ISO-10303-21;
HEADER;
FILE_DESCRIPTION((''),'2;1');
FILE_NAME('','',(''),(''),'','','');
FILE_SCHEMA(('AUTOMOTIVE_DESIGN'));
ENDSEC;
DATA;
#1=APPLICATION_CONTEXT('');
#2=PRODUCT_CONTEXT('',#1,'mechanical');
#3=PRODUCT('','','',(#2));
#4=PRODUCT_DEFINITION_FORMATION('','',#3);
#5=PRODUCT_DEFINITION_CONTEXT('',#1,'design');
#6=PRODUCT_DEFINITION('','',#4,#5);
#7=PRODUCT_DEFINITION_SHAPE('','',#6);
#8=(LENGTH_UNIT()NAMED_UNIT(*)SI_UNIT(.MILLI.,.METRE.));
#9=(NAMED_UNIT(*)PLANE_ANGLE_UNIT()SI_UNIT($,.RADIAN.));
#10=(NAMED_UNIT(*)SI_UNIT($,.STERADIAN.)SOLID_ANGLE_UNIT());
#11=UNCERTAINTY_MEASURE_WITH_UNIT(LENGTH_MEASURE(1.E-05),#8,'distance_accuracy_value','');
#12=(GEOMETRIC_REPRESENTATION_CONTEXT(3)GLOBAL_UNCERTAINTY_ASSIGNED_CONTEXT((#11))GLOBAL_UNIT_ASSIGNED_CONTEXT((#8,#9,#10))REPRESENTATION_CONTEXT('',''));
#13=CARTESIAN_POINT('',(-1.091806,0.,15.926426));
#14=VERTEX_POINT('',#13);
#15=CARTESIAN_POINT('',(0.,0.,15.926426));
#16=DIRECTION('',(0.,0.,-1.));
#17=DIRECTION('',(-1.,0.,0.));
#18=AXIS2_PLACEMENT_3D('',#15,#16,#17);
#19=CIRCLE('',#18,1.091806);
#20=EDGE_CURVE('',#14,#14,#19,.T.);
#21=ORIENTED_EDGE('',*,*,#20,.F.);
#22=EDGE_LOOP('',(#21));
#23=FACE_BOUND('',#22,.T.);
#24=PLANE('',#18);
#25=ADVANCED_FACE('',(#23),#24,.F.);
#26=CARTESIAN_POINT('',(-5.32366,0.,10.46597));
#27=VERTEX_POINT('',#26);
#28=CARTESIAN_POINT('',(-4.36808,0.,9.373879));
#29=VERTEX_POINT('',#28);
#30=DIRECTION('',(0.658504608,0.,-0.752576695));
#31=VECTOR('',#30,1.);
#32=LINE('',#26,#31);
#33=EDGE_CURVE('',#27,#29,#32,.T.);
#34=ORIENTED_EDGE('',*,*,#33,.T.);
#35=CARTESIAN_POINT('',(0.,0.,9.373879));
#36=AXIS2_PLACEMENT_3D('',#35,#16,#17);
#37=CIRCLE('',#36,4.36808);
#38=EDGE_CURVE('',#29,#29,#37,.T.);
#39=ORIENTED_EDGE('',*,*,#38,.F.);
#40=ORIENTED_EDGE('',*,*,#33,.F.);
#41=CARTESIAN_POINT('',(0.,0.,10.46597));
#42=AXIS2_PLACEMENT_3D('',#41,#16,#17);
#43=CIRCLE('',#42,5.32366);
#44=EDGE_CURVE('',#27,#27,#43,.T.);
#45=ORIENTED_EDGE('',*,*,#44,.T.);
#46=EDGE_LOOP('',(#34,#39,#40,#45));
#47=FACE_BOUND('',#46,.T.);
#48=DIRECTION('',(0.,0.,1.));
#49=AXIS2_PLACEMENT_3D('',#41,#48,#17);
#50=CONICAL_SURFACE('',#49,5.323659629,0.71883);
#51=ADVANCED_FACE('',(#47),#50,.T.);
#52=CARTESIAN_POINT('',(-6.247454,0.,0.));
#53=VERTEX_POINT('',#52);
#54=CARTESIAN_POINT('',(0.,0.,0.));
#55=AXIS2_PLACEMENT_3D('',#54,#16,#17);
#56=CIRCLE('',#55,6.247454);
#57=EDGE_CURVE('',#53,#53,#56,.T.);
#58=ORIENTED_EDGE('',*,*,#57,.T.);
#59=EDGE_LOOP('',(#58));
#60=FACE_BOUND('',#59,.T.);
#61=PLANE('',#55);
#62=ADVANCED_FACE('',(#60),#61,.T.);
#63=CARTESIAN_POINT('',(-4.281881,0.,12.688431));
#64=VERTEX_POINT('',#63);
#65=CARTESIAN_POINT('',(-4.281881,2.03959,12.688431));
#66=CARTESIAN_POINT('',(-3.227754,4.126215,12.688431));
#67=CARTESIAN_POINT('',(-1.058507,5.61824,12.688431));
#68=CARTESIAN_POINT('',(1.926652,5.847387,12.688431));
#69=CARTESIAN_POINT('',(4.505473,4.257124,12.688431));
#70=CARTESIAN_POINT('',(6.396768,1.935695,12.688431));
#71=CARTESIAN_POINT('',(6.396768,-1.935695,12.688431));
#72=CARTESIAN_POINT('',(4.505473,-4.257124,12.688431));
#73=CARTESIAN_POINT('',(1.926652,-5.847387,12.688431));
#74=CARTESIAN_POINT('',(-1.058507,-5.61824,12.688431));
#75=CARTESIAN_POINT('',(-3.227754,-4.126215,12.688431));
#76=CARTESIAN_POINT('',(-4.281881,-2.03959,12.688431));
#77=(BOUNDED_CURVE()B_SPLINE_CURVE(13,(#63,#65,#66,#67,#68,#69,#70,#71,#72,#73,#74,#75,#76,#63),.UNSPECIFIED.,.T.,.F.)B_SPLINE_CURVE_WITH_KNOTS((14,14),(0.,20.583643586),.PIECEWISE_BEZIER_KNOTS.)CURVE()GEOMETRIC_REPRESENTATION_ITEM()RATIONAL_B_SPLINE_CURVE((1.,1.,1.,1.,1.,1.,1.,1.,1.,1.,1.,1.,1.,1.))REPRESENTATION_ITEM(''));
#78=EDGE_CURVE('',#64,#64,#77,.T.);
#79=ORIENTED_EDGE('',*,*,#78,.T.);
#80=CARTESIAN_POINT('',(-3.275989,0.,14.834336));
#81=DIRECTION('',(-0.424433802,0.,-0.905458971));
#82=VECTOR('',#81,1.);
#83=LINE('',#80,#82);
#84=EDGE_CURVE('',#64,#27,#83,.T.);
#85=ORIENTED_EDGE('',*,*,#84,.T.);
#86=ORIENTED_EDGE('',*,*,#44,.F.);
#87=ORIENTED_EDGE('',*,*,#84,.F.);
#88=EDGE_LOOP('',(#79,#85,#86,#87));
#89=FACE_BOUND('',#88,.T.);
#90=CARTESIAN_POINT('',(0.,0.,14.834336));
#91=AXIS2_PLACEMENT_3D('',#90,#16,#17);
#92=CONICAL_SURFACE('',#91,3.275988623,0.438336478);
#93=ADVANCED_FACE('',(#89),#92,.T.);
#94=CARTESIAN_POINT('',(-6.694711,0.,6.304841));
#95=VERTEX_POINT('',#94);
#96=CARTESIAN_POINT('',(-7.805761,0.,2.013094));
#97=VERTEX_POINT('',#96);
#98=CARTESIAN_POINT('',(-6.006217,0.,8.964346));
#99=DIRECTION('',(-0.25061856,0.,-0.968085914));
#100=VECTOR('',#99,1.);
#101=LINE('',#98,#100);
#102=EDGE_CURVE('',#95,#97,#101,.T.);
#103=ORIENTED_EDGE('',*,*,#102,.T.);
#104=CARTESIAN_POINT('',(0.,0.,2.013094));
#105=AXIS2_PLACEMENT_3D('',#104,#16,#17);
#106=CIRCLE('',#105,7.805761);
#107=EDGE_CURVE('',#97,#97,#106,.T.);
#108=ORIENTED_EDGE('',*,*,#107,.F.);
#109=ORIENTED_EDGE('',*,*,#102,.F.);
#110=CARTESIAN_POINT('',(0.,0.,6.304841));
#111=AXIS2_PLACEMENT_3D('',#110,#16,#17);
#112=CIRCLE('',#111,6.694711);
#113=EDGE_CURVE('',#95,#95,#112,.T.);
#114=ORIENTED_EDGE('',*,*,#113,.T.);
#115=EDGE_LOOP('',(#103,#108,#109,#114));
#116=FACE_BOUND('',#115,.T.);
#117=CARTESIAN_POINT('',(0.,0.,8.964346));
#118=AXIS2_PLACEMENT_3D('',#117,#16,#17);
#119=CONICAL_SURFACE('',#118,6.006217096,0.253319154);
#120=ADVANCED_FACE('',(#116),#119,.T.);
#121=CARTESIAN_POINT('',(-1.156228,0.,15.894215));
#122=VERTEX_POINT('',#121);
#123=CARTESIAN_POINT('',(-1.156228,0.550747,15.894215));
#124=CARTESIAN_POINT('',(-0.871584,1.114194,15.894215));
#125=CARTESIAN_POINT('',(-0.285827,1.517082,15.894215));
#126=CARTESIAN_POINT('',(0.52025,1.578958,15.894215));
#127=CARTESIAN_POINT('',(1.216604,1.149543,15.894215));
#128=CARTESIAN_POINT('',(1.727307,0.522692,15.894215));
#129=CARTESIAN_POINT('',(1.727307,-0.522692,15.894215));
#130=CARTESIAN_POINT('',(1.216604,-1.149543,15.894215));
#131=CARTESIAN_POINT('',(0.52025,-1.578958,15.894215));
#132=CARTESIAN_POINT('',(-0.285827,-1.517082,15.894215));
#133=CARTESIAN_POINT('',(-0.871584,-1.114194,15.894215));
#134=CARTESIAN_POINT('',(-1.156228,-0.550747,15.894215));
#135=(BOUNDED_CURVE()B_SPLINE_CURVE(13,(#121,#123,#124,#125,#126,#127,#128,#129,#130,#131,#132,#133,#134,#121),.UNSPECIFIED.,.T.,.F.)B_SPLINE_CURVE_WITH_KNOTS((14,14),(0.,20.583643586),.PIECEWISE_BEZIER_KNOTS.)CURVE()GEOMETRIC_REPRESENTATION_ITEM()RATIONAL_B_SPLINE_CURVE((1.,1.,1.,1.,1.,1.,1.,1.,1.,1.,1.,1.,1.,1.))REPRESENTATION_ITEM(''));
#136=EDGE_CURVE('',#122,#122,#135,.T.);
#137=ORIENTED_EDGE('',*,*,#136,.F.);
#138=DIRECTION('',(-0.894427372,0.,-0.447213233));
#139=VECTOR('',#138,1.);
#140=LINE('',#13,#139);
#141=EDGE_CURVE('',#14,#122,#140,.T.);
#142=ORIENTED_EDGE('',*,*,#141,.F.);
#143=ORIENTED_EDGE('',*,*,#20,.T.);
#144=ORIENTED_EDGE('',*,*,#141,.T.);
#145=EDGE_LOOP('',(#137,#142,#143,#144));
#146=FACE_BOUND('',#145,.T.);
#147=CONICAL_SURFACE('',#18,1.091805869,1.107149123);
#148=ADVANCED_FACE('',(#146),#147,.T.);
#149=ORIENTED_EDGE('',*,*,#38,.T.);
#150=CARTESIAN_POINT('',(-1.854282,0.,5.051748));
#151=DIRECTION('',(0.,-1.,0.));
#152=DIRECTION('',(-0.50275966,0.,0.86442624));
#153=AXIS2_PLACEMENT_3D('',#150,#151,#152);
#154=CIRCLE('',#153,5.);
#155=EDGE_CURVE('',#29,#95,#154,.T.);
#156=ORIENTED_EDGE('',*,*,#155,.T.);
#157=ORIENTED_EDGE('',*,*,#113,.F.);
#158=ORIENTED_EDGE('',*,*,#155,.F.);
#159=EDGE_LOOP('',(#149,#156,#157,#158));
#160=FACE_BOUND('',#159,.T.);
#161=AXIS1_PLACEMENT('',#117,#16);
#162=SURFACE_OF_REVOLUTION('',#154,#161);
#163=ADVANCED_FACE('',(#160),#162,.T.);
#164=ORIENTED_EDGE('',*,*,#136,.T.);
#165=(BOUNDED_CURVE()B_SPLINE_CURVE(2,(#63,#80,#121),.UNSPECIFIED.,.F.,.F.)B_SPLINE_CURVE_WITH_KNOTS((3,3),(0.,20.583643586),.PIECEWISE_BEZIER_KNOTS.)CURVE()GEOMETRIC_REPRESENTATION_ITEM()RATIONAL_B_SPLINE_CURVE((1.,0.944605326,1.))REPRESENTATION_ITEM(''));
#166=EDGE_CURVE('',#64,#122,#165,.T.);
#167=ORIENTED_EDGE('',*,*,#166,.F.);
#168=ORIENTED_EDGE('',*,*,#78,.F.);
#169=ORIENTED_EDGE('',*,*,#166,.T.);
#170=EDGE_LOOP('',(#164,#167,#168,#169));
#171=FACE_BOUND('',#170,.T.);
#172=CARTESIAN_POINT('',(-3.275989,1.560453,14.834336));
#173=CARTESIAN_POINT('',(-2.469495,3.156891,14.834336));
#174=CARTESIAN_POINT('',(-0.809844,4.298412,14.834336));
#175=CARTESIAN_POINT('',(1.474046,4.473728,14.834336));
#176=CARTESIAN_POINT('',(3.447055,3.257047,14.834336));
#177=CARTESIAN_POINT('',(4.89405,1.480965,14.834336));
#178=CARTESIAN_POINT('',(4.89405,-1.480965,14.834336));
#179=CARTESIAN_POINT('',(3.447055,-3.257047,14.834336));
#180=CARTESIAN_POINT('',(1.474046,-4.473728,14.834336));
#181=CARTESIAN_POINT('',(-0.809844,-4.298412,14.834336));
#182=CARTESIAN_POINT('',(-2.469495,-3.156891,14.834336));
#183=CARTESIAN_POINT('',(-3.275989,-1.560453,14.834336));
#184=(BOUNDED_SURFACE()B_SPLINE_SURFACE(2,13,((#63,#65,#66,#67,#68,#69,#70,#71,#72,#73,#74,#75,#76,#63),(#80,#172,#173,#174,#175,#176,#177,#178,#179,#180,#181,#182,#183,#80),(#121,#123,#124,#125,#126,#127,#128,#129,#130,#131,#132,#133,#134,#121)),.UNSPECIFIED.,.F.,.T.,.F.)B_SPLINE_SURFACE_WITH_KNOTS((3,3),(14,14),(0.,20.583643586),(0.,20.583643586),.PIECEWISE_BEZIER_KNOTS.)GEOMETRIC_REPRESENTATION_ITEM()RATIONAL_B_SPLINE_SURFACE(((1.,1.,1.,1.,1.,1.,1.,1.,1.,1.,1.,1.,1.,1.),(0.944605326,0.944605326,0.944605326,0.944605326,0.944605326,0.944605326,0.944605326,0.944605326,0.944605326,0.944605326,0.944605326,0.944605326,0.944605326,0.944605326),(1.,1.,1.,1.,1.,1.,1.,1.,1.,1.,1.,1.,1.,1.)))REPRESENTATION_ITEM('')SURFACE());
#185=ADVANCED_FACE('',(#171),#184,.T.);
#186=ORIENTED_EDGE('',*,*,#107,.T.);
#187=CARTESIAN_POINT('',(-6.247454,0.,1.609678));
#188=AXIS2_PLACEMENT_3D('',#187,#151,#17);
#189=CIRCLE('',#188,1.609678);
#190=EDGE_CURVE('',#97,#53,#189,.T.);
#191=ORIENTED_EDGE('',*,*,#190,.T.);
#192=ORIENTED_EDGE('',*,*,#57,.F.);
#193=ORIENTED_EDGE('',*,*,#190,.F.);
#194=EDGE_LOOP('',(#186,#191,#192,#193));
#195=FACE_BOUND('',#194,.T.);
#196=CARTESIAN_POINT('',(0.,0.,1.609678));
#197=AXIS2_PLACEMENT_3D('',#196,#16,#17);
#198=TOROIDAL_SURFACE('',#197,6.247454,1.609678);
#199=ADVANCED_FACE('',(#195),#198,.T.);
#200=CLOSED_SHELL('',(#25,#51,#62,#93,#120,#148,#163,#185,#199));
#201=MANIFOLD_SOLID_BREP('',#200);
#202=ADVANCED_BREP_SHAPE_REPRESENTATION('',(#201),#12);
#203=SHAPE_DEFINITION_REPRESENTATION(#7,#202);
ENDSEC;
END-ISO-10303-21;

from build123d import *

# Parameters (mm, degrees)
F3_R = 6.8209108122
F4_R = 1.6096783158


# Not quite as in the source:
# - a fillet or chamfer that OpenCascade refuses, or shapes differently, is made with other operations: its cross-section is extruded or revolved along the edge and cut away or added


with BuildPart() as f1:
    # F0 (on Front) → F1 (revolve)
    with BuildSketch(Plane.XZ):
        Polygon((-8.3269113675, 0), (0, 0), (0, 15.9264262766), (-1.0918058688, 15.9264262766), (-3.2759886235, 14.8343360052), (-5.3236596286, 10.4659702629), (-4.3680798262, 9.3738790601), (-6.006217096, 8.9643457904), align=None)
    revolve(axis=Axis((0, 0, 7.9632131383), (0, 0, -1)))

    # F2: fillet of radius 5 on 1 edges, made by hand

    # F2_s1 → F2_t2 (revolve, cut)
    with BuildSketch(Plane.XZ):
        with BuildLine():
            ThreePointArc((-4.3680798262, 9.3738790601), (-5.8387408469, 8.0723577213), (-6.6947110993, 6.3048406604))
            Line((-6.6947110993, 6.3048406604), (-6.006217096, 8.9643457904))
            Line((-6.006217096, 8.9643457904), (-4.3680798262, 9.3738790601))
        make_face()
    revolve(axis=Axis((0, 0, 8.9643457904), (0, 0, -1)), mode=Mode.SUBTRACT)

    # F3
    f3_edges = [f1.edges().sort_by_distance(p)[0] for p in [
        (3.275989, 0, 14.834336),
    ]]
    fillet(f3_edges, radius=F3_R)

    # F4
    f4_edges = [f1.edges().sort_by_distance(p)[0] for p in [
        (8.326911, 0, 0),
    ]]
    fillet(f4_edges, radius=F4_R)


solid = f1.part
